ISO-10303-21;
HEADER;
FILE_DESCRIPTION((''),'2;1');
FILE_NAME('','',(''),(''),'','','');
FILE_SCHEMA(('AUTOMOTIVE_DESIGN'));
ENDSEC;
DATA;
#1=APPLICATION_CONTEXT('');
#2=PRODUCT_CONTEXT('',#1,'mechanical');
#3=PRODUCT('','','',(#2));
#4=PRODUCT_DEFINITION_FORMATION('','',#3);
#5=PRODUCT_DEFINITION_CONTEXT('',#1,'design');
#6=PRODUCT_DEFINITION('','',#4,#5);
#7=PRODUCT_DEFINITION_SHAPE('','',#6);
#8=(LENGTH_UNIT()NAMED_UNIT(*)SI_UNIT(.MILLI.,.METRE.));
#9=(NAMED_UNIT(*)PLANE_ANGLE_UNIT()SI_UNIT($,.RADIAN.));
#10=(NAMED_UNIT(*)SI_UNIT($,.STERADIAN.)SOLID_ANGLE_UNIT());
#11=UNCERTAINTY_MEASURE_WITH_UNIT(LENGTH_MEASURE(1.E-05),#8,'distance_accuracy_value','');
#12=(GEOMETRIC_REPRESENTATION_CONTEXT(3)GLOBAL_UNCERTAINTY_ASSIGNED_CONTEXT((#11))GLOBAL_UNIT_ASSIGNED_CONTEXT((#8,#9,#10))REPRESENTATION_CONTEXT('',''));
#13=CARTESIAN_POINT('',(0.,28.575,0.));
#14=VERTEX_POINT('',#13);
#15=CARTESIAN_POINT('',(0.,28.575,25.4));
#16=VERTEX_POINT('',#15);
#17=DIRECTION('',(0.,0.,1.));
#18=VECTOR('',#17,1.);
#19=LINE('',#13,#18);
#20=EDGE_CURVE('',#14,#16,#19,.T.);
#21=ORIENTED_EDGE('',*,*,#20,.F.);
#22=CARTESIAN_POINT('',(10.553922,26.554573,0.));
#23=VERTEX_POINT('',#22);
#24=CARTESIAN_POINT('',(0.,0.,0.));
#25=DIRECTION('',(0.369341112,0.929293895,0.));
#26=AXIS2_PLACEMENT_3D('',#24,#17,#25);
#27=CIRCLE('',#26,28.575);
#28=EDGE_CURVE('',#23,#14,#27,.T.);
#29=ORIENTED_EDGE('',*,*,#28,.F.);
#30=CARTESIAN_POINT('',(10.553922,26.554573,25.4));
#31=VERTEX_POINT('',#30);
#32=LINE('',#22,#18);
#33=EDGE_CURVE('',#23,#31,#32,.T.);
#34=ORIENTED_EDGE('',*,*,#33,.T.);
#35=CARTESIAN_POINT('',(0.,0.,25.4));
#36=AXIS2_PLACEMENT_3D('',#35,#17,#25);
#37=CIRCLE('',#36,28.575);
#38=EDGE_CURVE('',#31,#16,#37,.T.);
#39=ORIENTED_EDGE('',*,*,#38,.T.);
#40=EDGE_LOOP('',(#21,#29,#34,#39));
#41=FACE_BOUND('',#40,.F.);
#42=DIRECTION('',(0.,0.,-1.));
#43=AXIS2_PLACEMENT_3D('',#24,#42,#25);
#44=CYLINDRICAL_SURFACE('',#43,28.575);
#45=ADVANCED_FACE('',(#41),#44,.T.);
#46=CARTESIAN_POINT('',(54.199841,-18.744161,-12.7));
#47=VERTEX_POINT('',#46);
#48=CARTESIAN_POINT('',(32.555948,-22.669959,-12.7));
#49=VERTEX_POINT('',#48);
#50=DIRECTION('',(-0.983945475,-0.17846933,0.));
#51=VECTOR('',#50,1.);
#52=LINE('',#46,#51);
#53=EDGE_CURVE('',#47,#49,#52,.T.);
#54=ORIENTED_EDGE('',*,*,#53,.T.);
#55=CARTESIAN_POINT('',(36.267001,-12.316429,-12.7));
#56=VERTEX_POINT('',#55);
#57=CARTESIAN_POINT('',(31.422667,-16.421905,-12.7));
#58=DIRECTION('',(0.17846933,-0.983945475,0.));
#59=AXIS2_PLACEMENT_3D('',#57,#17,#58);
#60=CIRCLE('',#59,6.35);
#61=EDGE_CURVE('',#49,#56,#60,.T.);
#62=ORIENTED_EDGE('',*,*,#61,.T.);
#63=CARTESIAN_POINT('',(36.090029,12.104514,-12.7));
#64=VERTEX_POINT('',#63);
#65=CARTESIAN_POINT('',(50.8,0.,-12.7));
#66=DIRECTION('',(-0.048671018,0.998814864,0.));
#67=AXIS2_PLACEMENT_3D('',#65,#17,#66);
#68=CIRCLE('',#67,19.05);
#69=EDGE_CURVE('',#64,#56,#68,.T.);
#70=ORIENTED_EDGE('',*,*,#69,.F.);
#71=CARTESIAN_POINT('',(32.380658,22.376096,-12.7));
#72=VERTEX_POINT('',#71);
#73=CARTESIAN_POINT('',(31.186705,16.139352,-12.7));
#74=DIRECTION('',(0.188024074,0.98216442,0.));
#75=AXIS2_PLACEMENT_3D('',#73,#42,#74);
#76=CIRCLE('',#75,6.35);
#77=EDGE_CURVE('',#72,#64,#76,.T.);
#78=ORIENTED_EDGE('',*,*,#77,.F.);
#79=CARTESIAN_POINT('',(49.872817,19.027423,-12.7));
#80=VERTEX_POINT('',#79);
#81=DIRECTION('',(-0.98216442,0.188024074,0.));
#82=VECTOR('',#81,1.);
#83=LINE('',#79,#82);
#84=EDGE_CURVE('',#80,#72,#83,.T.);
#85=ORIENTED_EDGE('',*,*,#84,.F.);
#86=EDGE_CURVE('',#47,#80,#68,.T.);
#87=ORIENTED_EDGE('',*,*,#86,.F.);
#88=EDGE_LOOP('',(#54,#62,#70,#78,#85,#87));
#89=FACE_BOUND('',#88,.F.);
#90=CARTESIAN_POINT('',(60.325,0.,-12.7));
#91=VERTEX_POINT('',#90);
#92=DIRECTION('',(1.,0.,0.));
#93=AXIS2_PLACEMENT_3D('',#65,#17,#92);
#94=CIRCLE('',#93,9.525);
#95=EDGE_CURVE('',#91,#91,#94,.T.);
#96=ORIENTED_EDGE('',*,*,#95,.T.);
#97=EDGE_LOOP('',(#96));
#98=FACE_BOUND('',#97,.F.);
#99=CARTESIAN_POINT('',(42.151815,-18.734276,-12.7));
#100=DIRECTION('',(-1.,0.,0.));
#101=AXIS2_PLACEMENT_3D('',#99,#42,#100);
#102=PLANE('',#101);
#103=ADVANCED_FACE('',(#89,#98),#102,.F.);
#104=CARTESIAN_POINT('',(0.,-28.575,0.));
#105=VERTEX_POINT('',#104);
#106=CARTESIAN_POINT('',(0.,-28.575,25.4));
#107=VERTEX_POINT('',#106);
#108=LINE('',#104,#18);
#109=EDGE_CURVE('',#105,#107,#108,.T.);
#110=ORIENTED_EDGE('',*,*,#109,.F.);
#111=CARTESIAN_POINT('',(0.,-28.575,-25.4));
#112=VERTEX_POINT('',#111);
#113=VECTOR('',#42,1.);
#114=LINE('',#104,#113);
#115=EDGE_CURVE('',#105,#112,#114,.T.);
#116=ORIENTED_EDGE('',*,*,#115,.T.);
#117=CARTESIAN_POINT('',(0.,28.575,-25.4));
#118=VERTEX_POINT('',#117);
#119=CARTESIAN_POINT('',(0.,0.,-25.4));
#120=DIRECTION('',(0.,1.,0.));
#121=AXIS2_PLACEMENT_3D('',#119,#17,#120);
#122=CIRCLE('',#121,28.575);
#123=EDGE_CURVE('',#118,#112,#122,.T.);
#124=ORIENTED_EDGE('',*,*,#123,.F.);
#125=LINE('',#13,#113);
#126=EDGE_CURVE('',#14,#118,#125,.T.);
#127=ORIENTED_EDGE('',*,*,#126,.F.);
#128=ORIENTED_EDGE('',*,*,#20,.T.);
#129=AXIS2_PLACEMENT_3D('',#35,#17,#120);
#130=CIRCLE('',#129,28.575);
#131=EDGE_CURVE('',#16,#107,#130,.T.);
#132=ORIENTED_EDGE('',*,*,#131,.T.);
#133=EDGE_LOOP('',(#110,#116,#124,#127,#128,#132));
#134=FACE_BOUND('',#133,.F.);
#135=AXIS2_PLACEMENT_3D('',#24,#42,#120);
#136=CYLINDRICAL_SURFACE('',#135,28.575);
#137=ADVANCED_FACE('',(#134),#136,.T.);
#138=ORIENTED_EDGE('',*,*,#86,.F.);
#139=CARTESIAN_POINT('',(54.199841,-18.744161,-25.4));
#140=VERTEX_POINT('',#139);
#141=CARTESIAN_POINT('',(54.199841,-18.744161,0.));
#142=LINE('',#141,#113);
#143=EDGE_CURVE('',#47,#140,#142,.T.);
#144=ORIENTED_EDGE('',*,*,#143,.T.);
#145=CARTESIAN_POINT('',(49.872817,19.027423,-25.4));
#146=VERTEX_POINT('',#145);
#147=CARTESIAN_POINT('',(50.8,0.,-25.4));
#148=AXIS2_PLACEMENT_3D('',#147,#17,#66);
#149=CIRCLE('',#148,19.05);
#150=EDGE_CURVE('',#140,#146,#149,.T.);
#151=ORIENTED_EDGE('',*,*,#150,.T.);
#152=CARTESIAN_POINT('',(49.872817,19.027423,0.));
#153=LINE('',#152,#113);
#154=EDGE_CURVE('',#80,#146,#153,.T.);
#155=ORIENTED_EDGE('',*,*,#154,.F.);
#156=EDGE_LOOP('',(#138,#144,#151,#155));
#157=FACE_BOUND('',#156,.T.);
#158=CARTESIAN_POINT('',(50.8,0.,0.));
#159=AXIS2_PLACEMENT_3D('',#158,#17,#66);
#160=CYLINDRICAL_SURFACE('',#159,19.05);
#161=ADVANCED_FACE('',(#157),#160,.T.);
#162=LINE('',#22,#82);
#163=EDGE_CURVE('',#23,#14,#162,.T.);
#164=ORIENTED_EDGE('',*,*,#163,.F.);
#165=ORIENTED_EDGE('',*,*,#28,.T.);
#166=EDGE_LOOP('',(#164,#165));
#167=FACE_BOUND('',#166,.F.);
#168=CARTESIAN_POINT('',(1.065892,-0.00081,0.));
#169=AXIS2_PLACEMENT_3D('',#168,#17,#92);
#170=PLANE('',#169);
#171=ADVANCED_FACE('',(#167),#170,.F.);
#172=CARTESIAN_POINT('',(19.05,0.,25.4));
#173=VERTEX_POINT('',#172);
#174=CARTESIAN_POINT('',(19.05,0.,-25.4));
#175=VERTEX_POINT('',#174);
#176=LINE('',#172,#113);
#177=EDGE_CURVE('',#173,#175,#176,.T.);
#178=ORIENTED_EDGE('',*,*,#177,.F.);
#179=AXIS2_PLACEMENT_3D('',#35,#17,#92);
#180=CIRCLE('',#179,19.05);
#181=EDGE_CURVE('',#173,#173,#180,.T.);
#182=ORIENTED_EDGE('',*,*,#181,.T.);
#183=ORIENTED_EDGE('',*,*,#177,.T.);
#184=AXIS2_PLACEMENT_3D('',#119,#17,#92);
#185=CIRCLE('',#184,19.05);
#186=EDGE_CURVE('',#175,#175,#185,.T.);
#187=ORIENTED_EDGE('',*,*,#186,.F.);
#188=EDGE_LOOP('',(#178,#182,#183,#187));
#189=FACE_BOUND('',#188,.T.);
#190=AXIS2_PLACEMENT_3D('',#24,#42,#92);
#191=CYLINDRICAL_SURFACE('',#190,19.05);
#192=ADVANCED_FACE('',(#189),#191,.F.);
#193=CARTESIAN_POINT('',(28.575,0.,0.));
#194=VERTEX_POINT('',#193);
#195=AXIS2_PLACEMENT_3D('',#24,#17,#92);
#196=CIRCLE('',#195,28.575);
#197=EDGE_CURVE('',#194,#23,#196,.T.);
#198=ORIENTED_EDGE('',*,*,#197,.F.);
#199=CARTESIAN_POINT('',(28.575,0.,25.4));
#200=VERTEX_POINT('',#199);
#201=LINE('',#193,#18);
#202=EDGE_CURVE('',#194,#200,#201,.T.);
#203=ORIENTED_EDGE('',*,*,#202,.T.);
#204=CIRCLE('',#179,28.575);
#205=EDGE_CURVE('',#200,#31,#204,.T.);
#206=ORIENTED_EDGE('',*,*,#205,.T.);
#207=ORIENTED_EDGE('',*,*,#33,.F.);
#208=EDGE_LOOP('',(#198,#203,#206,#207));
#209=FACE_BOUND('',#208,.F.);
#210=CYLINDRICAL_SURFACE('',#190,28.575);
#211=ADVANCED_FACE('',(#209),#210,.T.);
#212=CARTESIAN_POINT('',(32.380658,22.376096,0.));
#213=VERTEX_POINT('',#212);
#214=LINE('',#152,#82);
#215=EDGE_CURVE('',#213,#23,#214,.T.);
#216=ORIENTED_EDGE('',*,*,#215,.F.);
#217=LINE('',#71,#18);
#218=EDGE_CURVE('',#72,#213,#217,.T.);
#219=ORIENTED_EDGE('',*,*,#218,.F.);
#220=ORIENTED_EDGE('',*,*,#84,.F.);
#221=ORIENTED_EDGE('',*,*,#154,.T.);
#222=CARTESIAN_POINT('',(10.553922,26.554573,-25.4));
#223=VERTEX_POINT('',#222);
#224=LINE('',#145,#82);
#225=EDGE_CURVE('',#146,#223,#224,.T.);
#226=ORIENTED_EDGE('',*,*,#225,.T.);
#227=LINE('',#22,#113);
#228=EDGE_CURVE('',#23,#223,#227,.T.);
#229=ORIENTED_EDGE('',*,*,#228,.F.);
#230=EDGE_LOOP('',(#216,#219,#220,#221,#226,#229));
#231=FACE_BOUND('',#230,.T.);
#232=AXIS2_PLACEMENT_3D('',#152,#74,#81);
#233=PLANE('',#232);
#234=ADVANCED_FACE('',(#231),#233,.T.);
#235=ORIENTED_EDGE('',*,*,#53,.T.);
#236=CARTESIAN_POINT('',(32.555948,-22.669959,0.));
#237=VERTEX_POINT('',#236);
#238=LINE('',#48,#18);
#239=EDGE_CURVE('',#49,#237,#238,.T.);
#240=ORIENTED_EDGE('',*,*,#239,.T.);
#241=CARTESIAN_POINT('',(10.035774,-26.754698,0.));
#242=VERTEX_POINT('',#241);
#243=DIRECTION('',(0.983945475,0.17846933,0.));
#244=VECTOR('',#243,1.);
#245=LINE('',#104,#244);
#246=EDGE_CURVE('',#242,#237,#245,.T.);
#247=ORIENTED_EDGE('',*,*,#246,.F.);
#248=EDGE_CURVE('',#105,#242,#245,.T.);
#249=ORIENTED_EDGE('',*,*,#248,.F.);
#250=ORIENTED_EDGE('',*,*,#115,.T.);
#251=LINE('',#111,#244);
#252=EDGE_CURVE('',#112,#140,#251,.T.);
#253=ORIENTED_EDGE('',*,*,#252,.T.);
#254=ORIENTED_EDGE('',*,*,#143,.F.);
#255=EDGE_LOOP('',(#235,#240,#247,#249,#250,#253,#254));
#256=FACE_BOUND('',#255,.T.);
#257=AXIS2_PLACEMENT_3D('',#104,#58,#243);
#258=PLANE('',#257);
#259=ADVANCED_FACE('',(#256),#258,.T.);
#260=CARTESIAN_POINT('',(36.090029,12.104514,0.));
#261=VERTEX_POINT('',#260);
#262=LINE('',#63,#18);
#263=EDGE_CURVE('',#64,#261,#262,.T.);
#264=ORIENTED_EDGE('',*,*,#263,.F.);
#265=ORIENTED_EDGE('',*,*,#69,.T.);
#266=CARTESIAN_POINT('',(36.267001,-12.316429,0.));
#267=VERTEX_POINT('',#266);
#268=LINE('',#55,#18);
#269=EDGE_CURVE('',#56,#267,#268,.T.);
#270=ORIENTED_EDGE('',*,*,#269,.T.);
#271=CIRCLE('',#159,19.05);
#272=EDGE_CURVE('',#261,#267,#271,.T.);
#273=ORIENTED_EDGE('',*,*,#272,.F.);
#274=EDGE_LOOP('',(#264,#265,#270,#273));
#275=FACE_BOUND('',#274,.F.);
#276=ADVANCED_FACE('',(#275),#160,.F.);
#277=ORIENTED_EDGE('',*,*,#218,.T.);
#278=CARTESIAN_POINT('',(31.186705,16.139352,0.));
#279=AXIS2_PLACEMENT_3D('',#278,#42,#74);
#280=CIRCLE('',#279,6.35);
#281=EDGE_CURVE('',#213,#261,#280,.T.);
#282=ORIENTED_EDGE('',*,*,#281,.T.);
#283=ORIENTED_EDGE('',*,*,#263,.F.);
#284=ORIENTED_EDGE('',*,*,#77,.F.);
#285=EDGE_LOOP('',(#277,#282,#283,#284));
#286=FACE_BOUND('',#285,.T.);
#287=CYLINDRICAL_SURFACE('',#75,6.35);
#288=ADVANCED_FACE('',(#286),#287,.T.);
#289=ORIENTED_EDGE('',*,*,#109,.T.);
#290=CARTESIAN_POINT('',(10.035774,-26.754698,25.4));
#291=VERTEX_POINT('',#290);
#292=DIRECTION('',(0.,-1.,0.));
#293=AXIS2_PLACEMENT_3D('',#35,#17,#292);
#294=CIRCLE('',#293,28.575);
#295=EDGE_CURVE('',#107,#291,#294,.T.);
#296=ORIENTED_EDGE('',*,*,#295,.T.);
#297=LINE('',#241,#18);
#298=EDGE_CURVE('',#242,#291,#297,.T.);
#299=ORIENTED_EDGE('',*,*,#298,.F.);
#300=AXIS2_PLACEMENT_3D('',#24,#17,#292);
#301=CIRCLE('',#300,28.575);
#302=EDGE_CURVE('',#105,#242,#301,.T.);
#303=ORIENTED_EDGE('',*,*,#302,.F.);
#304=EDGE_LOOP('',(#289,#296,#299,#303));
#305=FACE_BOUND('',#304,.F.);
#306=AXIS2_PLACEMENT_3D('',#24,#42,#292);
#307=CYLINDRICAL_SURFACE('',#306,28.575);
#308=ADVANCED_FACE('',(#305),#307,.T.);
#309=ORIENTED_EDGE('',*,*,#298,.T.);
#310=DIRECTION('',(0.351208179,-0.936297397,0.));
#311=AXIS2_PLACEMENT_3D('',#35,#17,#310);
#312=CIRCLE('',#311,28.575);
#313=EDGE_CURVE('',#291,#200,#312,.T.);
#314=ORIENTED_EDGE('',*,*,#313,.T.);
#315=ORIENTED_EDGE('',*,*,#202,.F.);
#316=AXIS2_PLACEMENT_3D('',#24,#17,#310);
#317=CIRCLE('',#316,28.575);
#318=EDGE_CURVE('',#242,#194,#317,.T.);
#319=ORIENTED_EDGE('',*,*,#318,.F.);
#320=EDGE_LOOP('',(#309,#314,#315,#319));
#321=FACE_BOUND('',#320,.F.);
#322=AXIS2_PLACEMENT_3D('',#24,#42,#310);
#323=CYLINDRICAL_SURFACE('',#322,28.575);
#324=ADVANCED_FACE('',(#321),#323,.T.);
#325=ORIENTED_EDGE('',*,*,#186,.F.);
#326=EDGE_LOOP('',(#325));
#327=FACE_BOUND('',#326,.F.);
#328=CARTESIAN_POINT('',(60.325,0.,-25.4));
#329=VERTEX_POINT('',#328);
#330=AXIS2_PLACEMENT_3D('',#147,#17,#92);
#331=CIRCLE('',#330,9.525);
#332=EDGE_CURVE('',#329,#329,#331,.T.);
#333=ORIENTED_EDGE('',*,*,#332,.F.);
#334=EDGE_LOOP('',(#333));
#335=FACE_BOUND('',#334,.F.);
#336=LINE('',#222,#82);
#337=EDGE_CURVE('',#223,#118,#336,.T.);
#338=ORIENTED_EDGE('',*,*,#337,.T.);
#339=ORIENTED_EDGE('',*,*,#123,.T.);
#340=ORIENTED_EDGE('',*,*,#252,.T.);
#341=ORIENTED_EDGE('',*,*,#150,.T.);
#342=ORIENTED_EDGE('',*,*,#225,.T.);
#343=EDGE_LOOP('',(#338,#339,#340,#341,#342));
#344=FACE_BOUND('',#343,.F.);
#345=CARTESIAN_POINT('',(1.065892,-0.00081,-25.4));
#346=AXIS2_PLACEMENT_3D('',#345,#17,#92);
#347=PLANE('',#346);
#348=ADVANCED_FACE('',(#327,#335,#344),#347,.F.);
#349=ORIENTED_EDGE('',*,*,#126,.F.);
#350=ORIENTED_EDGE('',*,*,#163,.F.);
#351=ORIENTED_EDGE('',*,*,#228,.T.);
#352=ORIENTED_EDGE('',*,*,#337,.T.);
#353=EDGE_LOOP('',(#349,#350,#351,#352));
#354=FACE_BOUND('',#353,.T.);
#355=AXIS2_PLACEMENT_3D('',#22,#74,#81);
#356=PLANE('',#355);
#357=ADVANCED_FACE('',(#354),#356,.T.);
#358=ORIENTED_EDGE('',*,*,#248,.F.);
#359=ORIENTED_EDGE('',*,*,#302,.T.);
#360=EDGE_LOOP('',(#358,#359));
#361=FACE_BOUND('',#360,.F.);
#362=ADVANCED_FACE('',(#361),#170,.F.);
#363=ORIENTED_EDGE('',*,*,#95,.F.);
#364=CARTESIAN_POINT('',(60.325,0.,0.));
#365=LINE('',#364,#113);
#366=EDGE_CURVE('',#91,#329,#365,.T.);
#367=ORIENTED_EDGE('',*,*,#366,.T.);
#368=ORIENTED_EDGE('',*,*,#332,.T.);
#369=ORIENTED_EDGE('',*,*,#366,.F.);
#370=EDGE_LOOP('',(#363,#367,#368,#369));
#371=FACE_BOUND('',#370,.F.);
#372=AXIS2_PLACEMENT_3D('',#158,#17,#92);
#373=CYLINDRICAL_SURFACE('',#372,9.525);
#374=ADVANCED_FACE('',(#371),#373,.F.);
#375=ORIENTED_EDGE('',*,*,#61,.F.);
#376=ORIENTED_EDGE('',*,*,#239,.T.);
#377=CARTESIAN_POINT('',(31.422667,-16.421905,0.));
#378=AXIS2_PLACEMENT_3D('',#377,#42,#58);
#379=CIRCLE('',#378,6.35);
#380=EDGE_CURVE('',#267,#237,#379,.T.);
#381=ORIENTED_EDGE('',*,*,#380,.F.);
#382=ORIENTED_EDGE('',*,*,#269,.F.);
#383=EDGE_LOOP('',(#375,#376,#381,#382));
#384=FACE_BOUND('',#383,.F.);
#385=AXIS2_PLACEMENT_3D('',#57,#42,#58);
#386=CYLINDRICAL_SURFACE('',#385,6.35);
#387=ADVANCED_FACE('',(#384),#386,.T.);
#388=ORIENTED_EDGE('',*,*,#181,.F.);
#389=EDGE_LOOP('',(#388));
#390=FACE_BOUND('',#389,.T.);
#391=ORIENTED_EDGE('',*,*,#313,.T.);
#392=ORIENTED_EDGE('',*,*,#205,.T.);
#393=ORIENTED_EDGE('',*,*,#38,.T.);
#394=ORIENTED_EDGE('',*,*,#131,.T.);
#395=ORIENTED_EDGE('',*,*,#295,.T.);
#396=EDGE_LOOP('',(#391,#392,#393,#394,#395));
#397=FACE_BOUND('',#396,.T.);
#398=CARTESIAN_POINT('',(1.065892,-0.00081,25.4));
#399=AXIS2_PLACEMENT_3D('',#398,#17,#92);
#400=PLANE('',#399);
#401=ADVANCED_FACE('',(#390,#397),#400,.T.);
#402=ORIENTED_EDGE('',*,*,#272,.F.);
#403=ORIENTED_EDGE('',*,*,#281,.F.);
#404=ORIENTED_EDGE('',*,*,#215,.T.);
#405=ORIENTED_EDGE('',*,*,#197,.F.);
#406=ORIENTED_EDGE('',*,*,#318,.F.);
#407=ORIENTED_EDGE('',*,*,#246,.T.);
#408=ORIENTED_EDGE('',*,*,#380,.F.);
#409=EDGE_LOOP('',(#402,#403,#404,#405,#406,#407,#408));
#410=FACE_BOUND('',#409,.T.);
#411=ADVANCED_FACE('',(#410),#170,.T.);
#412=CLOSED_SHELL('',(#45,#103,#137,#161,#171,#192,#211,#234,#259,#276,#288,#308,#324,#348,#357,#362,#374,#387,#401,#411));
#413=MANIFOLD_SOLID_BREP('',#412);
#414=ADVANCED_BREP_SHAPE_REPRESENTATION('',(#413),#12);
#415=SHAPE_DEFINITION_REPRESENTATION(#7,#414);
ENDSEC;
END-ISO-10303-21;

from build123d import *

# Parameters (mm, degrees)
F0_R        = 19.05
F0_R_2      = 9.525
F1_DEPTH    = 25.4
F2_DEPTH    = 25.4
F3_DEPTH    = 12.7
F4_T1_DEPTH = 57.2245179891
F4_T3_DEPTH = 67.6926131403


# Not quite as in the source:
# - a fillet or chamfer that OpenCascade refuses, or shapes differently, is made with other operations: its cross-section is extruded or revolved along the edge and cut away or added


with BuildPart() as f1:
    # F0 (on Top) → F1 (new body)
    with BuildSketch(Plane.XY):
        with BuildLine():
            Line((10.5539222721, 26.5545730464), (0, 28.575))
            ThreePointArc((0, 28.575), (-28.575, 0), (0, -28.575))
            Line((0, -28.575), (10.035773719, -26.7546981082))
            ThreePointArc((10.035773719, -26.7546981082), (23.4872610048, -16.2751096921), (28.575, 0))
            ThreePointArc((28.575, 0), (23.644332872, 16.046063319), (10.5539222721, 26.5545730464))
        make_face()
        Circle(F0_R, mode=Mode.SUBTRACT)
        with BuildLine():
            Line((49.8728171001, 19.0274231537), (10.5539222721, 26.5545730464))
            ThreePointArc((10.5539222721, 26.5545730464), (23.644332872, 16.046063319), (28.575, 0))
            ThreePointArc((28.575, 0), (23.4872610048, -16.2751096921), (10.035773719, -26.7546981082))
            Line((10.035773719, -26.7546981082), (54.1998407335, -18.7441613039))
            ThreePointArc((54.1998407335, -18.7441613039), (31.8737838621, -2.1681426844), (49.8728171001, 19.0274231537))
        make_face()
        with BuildLine():
            ThreePointArc((69.85, 0), (63.9384867043, 13.7942983555), (49.8728171001, 19.0274231537))
            ThreePointArc((49.8728171001, 19.0274231537), (31.8737838621, -2.1681426844), (54.1998407335, -18.7441613039))
            ThreePointArc((54.1998407335, -18.7441613039), (65.4230890371, -12.2093311452), (69.85, 0))
        make_face()
        with Locations((50.8, 0)):
            Circle(F0_R_2, mode=Mode.SUBTRACT)
    extrude(amount=-F1_DEPTH)

    # F0 (on Top) → F2 (join)
    with BuildSketch(Plane.XY):
        with BuildLine():
            Line((10.5539222721, 26.5545730464), (0, 28.575))
            ThreePointArc((0, 28.575), (-28.575, 0), (0, -28.575))
            Line((0, -28.575), (10.035773719, -26.7546981082))
            ThreePointArc((10.035773719, -26.7546981082), (23.4872610048, -16.2751096921), (28.575, 0))
            ThreePointArc((28.575, 0), (23.644332872, 16.046063319), (10.5539222721, 26.5545730464))
        make_face()
        Circle(F0_R, mode=Mode.SUBTRACT)
        with BuildLine():
            Line((10.035773719, -26.7546981082), (0, -28.575))
            ThreePointArc((0, -28.575), (5.0997611002, -28.1162419559), (10.035773719, -26.7546981082))
        make_face()
        with BuildLine():
            ThreePointArc((10.5539222721, 26.5545730464), (5.3727879262, 28.0653482947), (0, 28.575))
            Line((0, 28.575), (10.5539222721, 26.5545730464))
        make_face()
    extrude(amount=F2_DEPTH)

    # F0 (on Top) → F3 (cut)
    with BuildSketch(Plane.XY):
        with BuildLine():
            ThreePointArc((69.85, 0), (63.9384867043, 13.7942983555), (49.8728171001, 19.0274231537))
            ThreePointArc((49.8728171001, 19.0274231537), (31.8737838621, -2.1681426844), (54.1998407335, -18.7441613039))
            ThreePointArc((54.1998407335, -18.7441613039), (65.4230890371, -12.2093311452), (69.85, 0))
        make_face()
        with Locations((50.8, 0)):
            Circle(F0_R_2, mode=Mode.SUBTRACT)
    extrude(amount=-F3_DEPTH, mode=Mode.SUBTRACT)

    # F4: fillet of radius 6.35 on 3 edges, made by hand

    # F4_s2 → F4_t1 (cut)
    with BuildSketch(Plane.XY.offset(-12.7)):
        with BuildLine():
            ThreePointArc((32.3806581498, 22.376095667), (37.1591875386, 18.2961908719), (36.0900289579, 12.1045137012))
            ThreePointArc((36.0900289579, 12.1045137012), (42.2494552996, 17.0232395662), (49.8728171001, 19.0274231537))
            Line((49.8728171001, 19.0274231537), (32.3806581498, 22.376095667))
        make_face()
    extrude(amount=F4_T1_DEPTH, mode=Mode.SUBTRACT)

    # F4_s4 → F4_t3 (cut)
    with BuildSketch(Plane.XY.offset(-12.7)):
        with BuildLine():
            ThreePointArc((32.5559475844, -22.6699592292), (37.4002807494, -18.5644828639), (36.2670005049, -12.3164290959))
            ThreePointArc((36.2670005049, -12.3164290959), (44.372267792, -17.9328402285), (54.1998407335, -18.7441613039))
            Line((54.1998407335, -18.7441613039), (32.5559475844, -22.6699592292))
        make_face()
    extrude(amount=F4_T3_DEPTH, mode=Mode.SUBTRACT)


solid = f1.part
